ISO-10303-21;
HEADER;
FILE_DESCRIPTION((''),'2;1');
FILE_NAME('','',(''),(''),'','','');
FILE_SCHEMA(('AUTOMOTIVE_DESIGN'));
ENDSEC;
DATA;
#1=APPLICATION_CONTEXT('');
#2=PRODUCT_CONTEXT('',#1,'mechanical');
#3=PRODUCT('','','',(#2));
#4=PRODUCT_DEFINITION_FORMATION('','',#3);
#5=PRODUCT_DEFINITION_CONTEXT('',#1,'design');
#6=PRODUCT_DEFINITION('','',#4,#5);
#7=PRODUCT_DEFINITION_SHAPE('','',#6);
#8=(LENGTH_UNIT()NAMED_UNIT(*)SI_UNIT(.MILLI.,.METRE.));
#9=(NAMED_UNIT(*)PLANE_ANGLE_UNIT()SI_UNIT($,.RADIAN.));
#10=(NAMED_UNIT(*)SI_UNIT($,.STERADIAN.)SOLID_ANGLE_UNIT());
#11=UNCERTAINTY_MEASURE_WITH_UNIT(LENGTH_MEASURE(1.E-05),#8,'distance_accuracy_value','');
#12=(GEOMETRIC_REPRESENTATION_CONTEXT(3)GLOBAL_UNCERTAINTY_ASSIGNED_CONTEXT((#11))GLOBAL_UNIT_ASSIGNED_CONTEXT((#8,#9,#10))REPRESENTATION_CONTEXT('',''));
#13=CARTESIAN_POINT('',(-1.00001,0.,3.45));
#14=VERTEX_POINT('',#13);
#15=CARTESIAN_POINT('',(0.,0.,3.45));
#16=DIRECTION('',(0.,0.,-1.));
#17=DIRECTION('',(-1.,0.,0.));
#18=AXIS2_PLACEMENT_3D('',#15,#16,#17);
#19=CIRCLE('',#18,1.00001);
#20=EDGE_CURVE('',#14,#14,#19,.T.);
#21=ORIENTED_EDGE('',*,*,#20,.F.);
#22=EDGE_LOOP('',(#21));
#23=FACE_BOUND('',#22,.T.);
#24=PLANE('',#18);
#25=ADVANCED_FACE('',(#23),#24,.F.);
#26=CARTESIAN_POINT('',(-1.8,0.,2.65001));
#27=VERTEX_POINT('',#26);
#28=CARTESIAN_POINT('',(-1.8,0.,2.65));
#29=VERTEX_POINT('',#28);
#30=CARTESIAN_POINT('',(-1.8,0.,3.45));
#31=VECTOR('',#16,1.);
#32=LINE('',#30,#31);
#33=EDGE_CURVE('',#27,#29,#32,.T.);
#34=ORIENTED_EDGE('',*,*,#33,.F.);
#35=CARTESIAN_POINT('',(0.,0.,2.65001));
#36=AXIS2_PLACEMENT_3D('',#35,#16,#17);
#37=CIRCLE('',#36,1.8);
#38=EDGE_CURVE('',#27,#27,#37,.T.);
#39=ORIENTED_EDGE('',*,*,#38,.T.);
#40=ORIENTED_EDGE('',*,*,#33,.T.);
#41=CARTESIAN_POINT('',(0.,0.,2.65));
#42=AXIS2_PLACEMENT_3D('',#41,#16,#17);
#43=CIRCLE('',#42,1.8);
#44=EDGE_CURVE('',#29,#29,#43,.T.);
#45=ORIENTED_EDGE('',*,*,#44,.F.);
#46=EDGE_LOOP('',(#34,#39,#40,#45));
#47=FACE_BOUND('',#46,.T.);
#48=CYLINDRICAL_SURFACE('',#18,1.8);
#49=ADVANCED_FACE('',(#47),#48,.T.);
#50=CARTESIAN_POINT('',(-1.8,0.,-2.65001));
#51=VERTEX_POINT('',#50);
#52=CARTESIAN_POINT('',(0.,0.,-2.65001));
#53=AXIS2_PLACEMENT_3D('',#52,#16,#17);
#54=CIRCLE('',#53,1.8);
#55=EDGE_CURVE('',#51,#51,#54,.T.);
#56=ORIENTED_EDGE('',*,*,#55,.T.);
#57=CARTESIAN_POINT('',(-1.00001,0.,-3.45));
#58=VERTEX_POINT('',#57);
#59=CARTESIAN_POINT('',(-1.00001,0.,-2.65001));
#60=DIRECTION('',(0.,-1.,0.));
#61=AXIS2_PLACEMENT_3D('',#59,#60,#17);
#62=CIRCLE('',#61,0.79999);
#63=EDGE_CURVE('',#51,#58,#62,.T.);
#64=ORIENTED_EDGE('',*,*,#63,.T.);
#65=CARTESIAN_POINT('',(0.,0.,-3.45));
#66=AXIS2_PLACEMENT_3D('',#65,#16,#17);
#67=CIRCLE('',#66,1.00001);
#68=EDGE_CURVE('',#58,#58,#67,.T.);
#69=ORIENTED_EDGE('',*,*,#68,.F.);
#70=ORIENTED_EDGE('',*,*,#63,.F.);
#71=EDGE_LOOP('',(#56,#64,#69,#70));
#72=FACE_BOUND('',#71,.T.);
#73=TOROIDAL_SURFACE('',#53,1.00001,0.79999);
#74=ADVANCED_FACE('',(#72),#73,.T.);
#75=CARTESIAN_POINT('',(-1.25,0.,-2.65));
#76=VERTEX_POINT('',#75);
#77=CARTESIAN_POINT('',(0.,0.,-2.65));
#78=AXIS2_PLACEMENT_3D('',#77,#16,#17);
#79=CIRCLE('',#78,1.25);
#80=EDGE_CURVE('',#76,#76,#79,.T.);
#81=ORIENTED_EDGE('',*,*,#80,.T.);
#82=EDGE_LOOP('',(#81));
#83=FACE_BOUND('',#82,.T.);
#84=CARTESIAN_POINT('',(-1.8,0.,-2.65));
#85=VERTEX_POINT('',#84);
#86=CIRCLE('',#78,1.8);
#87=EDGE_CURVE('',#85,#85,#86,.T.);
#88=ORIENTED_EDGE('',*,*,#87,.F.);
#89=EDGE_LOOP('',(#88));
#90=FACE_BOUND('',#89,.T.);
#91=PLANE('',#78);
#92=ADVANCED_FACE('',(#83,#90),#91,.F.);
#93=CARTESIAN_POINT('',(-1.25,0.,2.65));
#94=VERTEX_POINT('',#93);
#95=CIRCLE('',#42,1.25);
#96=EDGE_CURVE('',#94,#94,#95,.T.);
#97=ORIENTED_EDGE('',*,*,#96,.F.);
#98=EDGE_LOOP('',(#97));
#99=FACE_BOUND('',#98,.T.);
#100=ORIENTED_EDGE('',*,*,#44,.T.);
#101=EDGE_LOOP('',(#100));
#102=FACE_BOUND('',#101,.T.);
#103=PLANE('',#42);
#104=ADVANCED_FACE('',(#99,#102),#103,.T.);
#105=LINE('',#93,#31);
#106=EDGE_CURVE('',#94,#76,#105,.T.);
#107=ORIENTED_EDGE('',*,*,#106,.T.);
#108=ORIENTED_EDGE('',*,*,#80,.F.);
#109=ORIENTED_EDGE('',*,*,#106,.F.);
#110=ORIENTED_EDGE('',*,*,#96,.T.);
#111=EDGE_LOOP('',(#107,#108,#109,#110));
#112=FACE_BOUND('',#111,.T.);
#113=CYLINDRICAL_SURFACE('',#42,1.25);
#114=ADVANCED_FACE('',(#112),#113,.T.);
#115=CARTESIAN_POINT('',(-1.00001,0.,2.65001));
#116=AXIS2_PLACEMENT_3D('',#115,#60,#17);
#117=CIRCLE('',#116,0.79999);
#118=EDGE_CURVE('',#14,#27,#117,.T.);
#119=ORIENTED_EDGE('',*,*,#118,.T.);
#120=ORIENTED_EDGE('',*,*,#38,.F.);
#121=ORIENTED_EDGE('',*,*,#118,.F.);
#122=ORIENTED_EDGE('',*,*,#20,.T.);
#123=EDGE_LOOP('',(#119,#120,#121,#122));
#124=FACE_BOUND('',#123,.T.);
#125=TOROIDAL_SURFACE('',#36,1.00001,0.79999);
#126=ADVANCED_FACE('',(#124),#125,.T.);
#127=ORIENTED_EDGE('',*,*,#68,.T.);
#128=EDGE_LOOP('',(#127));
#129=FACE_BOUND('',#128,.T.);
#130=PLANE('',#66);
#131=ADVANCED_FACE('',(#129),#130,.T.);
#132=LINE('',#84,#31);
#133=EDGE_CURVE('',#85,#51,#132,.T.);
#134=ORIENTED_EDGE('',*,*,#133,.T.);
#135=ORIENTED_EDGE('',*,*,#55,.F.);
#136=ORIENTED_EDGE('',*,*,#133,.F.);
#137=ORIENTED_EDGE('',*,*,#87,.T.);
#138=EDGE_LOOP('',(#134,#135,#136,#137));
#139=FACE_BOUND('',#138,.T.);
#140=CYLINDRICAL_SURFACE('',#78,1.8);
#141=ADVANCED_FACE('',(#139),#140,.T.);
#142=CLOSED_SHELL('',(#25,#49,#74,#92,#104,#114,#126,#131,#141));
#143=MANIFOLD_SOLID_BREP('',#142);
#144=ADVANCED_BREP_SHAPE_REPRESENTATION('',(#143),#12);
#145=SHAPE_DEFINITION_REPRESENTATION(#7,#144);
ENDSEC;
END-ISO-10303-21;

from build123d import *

# Parameters (mm, degrees)
F2_R = 0.79999


# Not quite as in the source:
# - a fillet or chamfer is up to 0.001 mm smaller than in the source, because OpenCascade refuses the exact size


with BuildPart() as f1:
    # F0 (on Front) → F1 (revolve)
    with BuildSketch(Plane.XZ):
        Polygon((-1.8, 2.65), (-1.25, 2.65), (-1.25, -2.65), (-1.8, -2.65), (-1.8, -3.45), (0, -3.45), (0, 0), (0, 3.45), (-1.8, 3.45), align=None)
    revolve(axis=Axis((0, 0, -0.5684057251), (0, 0, -1)))

    # F2 (radius 0.8 in the source; OpenCascade refuses exactly that, so slightly less here)
    f2_edges = [f1.edges().sort_by_distance(p)[0] for p in [
        (1.8, 0, 3.45),
        (1.8, 0, -3.45),
    ]]
    fillet(f2_edges, radius=F2_R)


solid = f1.part
